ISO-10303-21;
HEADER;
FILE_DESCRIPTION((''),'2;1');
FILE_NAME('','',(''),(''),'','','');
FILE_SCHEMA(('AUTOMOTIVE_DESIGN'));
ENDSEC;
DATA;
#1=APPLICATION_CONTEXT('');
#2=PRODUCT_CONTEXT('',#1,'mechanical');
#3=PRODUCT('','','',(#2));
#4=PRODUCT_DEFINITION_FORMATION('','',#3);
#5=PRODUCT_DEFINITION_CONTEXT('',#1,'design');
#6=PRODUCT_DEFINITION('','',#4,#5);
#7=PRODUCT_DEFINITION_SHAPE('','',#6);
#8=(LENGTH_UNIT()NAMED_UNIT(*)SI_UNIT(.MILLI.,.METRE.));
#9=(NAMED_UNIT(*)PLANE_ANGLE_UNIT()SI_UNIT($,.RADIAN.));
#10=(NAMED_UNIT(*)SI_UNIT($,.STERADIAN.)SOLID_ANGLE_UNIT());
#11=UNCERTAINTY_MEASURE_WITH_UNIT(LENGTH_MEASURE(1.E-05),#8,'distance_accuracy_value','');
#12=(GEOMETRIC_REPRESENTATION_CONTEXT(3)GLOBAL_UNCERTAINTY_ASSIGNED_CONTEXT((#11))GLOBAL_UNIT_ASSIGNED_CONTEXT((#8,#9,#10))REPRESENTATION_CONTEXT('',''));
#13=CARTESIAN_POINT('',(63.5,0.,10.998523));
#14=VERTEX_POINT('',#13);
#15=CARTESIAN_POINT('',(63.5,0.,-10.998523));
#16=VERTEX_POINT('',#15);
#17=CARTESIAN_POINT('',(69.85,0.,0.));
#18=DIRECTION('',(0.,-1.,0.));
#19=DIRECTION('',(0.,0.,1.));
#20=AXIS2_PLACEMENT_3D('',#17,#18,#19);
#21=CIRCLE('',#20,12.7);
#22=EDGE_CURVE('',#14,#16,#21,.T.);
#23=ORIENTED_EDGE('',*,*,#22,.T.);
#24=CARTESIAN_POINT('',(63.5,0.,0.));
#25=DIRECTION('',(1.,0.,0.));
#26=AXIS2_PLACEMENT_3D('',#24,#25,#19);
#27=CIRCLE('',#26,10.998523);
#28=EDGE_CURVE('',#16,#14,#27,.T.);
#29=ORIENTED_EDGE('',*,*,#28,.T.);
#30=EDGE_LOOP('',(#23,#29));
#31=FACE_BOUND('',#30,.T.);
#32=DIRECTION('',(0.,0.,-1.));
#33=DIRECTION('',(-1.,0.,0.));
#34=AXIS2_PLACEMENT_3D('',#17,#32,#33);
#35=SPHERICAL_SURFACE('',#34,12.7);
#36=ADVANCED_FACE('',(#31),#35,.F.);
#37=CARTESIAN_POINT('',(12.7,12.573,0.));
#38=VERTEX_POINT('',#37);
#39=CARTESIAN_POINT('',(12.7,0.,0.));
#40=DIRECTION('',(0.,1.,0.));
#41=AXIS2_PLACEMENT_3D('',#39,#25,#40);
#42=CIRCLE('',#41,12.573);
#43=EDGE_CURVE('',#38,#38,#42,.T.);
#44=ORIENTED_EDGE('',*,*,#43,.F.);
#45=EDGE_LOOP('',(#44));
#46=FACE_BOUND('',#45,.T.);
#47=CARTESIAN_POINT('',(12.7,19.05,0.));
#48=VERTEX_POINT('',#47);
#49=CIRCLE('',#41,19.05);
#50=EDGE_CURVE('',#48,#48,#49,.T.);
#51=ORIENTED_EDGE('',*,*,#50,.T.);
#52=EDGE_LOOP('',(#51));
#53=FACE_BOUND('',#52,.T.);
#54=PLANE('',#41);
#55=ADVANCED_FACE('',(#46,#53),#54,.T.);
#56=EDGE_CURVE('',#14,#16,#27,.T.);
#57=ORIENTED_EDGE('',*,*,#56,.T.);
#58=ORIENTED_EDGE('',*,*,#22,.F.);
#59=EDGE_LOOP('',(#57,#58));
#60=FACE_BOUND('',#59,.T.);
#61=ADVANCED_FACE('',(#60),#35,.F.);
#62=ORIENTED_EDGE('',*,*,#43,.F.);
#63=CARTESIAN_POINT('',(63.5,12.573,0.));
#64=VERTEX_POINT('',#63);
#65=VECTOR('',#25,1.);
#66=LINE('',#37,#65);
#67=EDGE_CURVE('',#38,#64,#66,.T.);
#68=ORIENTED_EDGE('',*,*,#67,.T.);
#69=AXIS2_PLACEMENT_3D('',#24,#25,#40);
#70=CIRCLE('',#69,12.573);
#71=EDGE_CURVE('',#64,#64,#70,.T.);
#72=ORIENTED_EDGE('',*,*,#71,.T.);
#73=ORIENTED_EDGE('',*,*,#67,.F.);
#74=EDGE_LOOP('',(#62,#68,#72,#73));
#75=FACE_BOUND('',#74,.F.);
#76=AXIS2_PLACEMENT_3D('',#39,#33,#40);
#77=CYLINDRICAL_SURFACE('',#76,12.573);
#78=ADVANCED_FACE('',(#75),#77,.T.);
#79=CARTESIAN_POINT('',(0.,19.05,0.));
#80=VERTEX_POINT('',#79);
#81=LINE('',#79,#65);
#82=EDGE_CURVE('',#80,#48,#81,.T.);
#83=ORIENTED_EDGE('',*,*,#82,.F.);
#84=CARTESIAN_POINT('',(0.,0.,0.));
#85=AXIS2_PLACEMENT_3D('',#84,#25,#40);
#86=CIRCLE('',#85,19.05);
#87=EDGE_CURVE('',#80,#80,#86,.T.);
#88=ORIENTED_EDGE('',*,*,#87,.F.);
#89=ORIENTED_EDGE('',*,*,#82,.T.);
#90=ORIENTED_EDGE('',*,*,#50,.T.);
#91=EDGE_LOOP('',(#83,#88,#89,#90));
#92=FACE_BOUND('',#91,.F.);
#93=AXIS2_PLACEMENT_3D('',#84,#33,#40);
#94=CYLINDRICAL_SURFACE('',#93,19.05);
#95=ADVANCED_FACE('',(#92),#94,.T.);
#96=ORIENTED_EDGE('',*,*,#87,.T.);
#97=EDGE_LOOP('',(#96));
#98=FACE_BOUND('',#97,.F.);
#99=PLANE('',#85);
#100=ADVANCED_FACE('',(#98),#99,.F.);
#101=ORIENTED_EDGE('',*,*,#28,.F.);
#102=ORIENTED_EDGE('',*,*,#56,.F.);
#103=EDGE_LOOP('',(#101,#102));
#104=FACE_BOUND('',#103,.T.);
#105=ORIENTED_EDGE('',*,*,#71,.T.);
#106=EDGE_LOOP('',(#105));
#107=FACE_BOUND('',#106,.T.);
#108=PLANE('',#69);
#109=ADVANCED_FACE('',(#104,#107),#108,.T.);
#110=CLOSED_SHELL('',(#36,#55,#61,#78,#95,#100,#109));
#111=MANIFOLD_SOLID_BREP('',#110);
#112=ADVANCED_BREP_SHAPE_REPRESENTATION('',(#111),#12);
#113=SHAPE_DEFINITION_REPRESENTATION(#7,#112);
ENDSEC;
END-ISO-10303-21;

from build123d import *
from build123d import SkipClean  # not in build123d's __all__

# Parameters (mm, degrees)
F0_R     = 19.05
F1_DEPTH = 12.7
F2_R     = 12.573
F3_DEPTH = 50.8


with BuildPart() as f1:
    # F0 (on Right) → F1 (new body)
    with BuildSketch(Plane.YZ):
        Circle(F0_R)
    extrude(amount=F1_DEPTH)

    # F2 (on face) → F3 (join)
    with BuildSketch(Plane.YZ.offset(12.7)):
        Circle(F2_R)
    extrude(amount=F3_DEPTH)

    # F4 (on Front) → F5 (revolve, cut)
    with BuildSketch(Plane.XZ):
        with BuildLine():
            Line((69.85, -12.7), (69.85, 12.7))
            ThreePointArc((69.85, 12.7), (57.15, 0), (69.85, -12.7))
        make_face()
    with SkipClean():  # cleaning this boolean's faces spoils the solid; the shape is the same uncleaned
        revolve(axis=Axis((69.85, 0, 17.1570373535), (0, 0, 1)), mode=Mode.SUBTRACT)


solid = f1.part
